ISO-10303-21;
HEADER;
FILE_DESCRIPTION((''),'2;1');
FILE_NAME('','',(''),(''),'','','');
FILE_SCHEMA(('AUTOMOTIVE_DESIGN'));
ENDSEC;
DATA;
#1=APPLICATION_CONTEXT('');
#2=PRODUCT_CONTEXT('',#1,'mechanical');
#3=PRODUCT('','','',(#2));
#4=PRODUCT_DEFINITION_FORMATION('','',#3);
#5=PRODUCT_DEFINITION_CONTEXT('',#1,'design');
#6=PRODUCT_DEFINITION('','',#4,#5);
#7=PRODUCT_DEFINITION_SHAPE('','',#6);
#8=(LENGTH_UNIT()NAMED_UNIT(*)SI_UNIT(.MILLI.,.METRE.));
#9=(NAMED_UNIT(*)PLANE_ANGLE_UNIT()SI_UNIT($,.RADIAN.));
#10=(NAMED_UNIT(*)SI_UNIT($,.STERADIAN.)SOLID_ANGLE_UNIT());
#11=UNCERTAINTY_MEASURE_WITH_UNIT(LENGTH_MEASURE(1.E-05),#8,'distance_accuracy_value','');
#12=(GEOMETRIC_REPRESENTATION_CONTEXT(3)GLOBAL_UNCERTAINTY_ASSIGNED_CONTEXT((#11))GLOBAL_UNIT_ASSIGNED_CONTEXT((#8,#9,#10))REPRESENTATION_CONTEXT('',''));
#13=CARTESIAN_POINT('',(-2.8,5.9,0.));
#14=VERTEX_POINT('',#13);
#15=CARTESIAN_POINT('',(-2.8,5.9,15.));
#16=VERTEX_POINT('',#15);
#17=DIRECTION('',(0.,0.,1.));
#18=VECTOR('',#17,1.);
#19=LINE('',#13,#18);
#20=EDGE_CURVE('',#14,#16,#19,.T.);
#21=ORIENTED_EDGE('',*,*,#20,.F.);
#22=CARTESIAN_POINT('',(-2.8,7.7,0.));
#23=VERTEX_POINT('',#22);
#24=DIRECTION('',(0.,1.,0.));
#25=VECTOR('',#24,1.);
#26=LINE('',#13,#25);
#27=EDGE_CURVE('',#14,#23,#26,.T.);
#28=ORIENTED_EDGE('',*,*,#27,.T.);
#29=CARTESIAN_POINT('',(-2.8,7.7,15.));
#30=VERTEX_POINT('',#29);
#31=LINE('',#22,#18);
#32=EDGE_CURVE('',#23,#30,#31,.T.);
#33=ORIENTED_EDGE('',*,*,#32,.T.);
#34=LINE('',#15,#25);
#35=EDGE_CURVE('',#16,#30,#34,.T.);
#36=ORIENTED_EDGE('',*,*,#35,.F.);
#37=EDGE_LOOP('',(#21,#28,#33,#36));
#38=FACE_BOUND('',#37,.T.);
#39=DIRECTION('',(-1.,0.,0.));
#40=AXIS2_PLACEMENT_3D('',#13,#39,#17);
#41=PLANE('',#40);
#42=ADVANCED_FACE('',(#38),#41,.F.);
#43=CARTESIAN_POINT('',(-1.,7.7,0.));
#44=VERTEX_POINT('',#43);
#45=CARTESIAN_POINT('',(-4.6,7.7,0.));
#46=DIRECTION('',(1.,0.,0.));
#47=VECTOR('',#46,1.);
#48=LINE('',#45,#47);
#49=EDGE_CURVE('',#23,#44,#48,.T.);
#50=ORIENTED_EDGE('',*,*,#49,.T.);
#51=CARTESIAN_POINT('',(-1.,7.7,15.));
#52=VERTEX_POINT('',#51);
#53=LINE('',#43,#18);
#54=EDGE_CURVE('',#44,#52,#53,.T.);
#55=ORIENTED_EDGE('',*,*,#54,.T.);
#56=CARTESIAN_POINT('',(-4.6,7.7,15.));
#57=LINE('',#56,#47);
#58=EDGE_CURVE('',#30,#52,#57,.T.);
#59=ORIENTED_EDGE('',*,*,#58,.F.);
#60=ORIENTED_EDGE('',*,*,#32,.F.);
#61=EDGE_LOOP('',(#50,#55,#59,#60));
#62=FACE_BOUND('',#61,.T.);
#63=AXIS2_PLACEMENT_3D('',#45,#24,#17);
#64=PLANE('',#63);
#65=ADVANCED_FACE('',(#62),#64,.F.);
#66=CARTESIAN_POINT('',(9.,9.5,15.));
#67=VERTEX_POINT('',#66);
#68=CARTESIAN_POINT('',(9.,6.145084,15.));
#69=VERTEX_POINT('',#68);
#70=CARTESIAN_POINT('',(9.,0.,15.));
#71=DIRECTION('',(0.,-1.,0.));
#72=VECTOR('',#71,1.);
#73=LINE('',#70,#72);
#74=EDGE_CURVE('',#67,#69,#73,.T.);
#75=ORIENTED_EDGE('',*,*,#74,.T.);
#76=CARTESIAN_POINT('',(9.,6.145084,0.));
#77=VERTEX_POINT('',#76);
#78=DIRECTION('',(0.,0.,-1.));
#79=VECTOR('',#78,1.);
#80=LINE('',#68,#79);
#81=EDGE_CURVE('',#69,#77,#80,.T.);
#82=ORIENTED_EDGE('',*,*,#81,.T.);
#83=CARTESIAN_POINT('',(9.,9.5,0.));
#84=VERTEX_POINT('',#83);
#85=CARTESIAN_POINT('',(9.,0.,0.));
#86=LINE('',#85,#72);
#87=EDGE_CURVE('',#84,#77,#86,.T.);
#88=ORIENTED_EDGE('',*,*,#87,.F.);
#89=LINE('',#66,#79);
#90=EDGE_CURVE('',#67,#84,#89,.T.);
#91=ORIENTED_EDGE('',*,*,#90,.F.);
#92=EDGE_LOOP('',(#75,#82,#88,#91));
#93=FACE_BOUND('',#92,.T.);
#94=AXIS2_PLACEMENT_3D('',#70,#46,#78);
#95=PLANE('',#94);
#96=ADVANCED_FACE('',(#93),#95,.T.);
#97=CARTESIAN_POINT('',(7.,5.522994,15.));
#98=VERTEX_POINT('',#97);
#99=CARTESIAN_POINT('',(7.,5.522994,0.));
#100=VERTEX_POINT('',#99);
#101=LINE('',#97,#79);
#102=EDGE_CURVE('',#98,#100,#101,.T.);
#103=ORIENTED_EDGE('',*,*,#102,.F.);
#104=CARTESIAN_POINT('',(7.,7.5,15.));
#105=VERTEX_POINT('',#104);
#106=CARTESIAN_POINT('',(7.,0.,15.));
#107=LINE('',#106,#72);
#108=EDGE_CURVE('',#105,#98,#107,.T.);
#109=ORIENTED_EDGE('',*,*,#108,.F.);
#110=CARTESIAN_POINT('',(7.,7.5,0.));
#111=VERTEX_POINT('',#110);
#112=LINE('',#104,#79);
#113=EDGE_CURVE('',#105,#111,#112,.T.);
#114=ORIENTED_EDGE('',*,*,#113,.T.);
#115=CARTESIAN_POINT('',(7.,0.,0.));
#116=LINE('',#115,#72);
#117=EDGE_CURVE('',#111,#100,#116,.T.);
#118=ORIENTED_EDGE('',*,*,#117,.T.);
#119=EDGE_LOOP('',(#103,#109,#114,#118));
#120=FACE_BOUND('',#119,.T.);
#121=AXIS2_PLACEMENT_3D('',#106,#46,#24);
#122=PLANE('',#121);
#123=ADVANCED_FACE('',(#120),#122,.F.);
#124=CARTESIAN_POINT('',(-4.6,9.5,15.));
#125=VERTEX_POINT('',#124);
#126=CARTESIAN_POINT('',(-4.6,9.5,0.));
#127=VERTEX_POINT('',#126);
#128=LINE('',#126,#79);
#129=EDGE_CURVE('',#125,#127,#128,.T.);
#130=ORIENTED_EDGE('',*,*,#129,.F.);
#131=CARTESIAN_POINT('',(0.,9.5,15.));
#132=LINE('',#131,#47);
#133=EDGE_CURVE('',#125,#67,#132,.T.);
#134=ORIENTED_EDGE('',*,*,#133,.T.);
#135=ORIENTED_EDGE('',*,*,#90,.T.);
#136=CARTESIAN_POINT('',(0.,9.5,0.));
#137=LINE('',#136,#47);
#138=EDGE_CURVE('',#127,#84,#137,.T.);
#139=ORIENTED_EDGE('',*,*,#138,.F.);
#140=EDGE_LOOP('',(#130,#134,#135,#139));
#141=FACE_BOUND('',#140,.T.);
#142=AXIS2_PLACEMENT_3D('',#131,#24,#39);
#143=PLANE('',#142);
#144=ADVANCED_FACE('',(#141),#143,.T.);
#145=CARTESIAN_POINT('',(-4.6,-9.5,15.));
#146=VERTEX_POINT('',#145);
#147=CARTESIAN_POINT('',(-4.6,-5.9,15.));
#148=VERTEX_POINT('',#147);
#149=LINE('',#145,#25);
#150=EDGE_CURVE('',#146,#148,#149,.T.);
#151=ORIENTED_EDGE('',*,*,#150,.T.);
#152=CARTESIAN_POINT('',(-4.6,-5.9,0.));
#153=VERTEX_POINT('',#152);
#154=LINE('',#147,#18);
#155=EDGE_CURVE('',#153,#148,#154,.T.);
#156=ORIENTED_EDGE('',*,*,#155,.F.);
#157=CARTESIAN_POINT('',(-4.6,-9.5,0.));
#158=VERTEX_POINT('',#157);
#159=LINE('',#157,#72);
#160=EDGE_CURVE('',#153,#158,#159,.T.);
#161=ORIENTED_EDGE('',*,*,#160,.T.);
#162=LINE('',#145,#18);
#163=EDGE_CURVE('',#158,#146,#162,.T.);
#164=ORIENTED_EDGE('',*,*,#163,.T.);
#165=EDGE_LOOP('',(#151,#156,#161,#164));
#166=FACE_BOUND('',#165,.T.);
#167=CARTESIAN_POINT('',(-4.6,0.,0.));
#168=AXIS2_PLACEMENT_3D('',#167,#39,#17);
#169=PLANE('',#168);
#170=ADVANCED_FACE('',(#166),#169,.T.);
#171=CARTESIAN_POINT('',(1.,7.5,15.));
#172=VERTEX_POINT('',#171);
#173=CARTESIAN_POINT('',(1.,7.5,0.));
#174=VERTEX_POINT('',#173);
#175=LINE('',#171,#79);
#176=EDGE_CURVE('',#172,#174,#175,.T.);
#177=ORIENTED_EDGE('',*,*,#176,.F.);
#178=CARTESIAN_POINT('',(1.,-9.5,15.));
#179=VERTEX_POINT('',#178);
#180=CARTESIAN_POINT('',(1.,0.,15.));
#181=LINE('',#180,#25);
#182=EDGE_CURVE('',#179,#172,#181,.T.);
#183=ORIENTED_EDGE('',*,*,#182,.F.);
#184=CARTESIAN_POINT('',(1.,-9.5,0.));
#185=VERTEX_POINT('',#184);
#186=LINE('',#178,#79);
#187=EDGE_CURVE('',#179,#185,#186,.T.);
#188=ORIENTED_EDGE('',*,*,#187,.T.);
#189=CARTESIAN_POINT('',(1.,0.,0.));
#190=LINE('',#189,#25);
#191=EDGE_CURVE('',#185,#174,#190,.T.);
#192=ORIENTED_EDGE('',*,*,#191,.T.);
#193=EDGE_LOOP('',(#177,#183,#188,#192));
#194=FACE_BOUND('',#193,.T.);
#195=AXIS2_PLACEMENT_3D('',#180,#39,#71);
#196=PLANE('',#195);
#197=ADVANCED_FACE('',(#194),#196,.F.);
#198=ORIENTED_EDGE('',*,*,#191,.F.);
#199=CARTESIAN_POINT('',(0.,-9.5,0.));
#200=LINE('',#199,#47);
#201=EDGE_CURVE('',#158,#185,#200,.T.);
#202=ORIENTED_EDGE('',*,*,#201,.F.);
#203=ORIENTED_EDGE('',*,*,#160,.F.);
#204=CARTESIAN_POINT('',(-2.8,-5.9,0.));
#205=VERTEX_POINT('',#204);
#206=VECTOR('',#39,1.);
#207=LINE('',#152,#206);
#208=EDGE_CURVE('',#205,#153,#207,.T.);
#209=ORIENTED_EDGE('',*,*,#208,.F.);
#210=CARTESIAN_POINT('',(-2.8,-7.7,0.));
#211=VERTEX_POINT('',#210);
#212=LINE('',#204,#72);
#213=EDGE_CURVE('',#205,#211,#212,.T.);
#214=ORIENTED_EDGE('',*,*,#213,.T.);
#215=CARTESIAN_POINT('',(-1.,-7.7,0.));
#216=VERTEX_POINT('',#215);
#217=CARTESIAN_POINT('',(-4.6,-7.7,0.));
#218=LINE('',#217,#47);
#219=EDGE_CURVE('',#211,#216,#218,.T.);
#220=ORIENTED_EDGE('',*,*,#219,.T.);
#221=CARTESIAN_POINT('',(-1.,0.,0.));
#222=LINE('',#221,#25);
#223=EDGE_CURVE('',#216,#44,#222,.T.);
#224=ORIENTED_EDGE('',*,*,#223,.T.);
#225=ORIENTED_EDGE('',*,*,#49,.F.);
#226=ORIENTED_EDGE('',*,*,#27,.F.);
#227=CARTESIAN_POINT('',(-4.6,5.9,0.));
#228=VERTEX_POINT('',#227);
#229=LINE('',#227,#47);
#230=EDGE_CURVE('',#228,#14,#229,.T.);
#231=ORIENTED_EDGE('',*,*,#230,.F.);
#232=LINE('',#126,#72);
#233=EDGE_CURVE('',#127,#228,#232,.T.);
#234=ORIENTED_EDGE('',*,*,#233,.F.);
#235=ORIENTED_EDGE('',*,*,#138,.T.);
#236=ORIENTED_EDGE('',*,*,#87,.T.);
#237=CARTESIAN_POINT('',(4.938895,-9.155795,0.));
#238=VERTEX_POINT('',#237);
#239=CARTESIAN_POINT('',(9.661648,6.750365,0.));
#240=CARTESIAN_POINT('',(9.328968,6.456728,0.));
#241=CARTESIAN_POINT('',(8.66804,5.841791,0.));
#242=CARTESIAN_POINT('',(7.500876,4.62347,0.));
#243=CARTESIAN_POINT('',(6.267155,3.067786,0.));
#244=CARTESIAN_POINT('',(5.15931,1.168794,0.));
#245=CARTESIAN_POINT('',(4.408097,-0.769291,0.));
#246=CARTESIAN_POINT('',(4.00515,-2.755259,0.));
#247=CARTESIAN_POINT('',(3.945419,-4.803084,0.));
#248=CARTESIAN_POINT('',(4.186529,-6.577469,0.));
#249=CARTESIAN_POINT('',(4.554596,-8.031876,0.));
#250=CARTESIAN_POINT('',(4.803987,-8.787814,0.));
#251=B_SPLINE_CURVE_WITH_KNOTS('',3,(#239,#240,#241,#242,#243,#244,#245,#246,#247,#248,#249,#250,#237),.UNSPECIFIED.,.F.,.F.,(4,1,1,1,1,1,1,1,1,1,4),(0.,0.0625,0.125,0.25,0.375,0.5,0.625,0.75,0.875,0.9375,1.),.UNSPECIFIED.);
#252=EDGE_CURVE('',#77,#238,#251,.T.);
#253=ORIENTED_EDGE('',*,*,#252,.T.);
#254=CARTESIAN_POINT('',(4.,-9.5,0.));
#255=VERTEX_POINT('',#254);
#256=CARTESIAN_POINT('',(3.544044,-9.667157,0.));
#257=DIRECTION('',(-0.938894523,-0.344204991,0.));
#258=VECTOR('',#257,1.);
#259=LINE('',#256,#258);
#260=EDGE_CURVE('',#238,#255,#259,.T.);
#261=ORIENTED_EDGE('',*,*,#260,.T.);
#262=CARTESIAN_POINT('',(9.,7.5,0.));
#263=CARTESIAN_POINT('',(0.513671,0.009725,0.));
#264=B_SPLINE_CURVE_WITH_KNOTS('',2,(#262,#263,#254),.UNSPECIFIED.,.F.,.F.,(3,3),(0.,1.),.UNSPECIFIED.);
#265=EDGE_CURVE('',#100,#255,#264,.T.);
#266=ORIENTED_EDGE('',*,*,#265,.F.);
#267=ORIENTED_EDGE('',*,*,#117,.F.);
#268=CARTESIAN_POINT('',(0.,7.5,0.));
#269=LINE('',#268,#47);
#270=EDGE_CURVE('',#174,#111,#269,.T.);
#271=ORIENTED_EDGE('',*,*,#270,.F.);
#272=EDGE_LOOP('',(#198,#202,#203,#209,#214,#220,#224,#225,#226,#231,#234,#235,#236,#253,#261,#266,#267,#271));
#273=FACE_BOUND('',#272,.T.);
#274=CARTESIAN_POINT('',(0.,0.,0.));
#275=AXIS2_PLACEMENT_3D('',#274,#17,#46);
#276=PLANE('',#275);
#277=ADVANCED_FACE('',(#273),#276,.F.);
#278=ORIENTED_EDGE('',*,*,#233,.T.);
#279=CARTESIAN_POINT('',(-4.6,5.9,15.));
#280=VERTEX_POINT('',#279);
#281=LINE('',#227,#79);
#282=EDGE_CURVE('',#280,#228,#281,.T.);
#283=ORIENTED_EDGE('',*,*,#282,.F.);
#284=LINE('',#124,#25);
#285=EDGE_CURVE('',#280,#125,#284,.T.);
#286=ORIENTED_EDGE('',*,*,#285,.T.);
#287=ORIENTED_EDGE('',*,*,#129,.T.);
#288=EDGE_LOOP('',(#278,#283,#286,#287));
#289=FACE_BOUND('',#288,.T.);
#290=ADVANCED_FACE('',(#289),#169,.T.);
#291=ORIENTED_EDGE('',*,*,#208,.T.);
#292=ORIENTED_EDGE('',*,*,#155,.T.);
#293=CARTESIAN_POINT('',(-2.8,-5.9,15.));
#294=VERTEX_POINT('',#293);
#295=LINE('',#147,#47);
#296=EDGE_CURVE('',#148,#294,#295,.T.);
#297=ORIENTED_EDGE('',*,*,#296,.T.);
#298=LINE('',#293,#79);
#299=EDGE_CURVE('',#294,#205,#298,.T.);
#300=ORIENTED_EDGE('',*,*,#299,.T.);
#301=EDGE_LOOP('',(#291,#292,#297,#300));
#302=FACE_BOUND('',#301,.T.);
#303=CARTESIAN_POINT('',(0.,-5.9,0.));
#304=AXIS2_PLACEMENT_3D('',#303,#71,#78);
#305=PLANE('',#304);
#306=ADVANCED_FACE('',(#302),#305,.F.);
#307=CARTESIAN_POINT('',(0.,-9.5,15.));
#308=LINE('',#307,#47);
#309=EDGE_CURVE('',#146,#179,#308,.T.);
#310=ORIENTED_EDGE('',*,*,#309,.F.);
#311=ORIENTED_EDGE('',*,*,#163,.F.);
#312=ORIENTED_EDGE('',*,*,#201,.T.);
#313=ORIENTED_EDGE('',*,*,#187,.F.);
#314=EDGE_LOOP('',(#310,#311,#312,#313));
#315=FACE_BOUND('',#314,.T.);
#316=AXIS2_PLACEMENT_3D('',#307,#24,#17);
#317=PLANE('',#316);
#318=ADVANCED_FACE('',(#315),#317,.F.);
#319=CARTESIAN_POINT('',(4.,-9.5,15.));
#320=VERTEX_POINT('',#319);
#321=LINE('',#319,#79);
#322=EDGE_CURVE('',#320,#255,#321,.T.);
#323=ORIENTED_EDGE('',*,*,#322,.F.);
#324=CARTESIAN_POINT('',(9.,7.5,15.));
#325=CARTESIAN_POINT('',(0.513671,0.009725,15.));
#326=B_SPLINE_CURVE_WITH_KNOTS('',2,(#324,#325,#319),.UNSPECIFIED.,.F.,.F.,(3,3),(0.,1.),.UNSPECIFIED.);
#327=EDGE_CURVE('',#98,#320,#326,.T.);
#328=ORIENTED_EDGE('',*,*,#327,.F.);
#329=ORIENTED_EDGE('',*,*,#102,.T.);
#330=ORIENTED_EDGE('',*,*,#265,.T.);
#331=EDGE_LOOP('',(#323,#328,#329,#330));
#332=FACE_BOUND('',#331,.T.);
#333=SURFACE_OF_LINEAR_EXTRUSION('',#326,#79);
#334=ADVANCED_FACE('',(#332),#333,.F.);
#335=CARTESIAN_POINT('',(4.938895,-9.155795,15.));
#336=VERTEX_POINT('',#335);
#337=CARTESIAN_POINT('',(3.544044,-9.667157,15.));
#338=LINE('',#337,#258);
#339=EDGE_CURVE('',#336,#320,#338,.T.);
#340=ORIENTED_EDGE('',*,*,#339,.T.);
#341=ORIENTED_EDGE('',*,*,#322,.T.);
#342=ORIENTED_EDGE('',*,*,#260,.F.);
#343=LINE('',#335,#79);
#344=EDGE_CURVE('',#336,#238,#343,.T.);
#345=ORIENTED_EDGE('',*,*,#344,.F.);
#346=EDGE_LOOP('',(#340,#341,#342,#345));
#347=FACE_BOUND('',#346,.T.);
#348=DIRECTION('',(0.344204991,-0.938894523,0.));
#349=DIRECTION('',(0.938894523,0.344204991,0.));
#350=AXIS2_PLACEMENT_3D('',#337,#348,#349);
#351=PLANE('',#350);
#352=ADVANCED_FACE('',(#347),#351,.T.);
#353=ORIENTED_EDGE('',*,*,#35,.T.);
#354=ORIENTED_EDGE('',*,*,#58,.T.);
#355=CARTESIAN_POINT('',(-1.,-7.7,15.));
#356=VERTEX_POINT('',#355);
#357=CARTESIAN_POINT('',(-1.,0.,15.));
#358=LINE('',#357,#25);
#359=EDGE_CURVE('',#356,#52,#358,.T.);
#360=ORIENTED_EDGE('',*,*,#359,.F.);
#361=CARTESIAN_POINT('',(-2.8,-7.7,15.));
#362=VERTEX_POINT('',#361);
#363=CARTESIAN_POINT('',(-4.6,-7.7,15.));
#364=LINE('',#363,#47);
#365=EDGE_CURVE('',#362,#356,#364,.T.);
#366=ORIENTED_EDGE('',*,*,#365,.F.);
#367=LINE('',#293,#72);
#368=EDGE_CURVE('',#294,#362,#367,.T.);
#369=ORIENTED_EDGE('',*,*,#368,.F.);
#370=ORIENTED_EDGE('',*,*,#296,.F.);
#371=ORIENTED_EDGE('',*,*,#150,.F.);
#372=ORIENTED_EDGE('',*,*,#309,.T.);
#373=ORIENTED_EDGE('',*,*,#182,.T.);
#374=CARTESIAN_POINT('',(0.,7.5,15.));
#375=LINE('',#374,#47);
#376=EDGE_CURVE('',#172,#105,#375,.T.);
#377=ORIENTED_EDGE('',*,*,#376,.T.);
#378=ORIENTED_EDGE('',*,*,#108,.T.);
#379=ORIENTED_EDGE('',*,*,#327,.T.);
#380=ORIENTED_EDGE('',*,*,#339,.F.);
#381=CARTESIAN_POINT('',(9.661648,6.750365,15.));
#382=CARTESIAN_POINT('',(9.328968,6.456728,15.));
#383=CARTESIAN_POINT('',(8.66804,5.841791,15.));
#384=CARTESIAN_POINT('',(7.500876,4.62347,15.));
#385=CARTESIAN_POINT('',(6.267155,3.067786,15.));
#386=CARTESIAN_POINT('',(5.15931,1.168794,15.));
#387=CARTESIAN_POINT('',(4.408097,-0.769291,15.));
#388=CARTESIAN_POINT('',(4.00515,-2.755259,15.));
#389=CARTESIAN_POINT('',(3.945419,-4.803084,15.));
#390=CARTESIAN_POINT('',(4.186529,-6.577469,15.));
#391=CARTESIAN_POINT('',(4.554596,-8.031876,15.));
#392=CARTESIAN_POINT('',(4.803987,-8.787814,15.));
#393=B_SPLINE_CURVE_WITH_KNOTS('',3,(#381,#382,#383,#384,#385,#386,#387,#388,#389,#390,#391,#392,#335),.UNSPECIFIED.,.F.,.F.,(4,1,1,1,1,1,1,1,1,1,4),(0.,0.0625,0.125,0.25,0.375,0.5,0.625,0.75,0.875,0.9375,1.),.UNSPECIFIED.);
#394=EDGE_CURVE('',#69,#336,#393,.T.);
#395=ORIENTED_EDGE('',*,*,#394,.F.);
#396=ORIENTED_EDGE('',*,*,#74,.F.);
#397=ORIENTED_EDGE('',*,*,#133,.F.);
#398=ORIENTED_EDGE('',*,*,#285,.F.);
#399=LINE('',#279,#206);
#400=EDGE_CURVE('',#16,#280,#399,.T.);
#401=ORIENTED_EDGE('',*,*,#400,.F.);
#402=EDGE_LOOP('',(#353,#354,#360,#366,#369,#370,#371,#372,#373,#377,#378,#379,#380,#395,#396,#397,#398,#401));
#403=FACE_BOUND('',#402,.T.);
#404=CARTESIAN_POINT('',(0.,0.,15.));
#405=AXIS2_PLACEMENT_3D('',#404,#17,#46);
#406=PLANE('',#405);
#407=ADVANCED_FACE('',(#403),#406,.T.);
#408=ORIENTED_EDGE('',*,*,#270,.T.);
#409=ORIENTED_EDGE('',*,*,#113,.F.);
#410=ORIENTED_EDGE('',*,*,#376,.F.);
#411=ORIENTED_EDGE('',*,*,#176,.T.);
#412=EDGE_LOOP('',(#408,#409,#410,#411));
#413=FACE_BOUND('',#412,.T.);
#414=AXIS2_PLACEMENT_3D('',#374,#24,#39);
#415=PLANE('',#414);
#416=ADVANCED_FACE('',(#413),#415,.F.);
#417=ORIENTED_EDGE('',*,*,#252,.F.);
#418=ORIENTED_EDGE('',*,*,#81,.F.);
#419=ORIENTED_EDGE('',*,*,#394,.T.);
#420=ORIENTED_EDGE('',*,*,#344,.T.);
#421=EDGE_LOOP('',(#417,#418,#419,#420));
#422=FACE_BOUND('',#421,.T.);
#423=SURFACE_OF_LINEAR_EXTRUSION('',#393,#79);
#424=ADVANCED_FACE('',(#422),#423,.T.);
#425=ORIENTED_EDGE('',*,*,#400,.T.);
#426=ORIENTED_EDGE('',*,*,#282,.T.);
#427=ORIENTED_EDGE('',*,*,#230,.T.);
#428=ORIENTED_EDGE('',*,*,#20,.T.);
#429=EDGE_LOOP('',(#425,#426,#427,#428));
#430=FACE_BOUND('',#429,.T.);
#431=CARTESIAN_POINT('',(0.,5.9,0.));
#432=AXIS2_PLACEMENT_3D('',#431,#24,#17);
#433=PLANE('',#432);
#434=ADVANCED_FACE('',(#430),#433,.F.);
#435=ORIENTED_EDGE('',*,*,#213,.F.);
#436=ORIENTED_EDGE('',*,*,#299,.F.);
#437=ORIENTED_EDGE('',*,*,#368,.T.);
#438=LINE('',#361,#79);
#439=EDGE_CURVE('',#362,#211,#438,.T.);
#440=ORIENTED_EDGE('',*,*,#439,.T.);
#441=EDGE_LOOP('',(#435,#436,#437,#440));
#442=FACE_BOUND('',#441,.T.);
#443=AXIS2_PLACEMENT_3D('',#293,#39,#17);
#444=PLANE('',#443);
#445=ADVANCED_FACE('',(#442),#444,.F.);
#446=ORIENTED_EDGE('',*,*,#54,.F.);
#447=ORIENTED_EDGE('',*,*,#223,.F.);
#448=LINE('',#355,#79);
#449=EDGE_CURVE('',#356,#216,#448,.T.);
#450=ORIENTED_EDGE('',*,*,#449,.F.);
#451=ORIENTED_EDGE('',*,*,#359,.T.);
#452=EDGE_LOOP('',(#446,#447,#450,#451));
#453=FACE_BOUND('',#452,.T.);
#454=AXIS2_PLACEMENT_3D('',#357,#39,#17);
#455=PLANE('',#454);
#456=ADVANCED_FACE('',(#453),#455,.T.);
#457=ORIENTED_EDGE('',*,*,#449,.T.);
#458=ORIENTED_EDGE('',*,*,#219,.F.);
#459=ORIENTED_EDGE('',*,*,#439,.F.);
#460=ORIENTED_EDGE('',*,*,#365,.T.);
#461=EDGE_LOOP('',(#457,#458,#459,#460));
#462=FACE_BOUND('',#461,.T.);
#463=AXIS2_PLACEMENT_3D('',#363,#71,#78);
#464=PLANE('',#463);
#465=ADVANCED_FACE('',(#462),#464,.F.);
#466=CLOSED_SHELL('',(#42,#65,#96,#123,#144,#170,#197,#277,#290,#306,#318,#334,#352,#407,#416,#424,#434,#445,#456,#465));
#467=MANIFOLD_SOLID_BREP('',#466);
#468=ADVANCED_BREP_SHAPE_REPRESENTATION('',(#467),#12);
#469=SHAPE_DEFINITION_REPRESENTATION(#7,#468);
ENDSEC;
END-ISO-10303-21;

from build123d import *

# Parameters (mm, degrees)
AUFSATZ_LINEAR_AUSTRAGEN1_DEPTH = 15
SKIZZE8_W                       = 15
SKIZZE8_H                       = 1.8
AUFSATZ_LINEAR_AUSTRAGEN2_DEPTH = 3.6
SKIZZE9_W                       = 1.8
SKIZZE9_H                       = 15
AUFSATZ_LINEAR_AUSTRAGEN3_DEPTH = 1.8
SKIZZE10_W                      = 1.8
SKIZZE10_H                      = 15
AUFSATZ_LINEAR_AUSTRAGEN4_DEPTH = 1.8


# Read off the part's stored shape, not the designer's step: Aufsatz-Linear austragen1
with BuildPart() as part:
    # Aufsatz-Linear austragen1 outline → Aufsatz-Linear austragen1 (new body)
    with BuildSketch(Plane.XY):
        with BuildLine():
            Line((7, 7.5), (7, 5.522993755))
            add(Edge.make_bspline(
                [(7, 5.522993755), (0.965861159, -1.223721572), (4, -9.5)],
                knots=[0.129703712, 0.129703712, 0.129703712, 1, 1, 1], degree=2))
            Line((4, -9.5), (4.938894523, -9.155795009))
            add(Edge.make_bspline(
                [(9, 6.145084082), (8.894106899, 6.044673778), (8.472209731, 5.637376992), (7.500876339, 4.623469608), (6.267154764, 3.067786271), (5.159309564, 1.168794415), (4.408096908, -0.769290789), (4.005150376, -2.755259304), (3.945419318, -4.803083613), (4.18652921, -6.57746866), (4.554595844, -8.031875726), (4.803987208, -8.787813624), (4.938894523, -9.155795009)],
                knots=[0.041945828, 0.041945828, 0.041945828, 0.041945828, 0.0625, 0.125, 0.25, 0.375, 0.5, 0.625, 0.75, 0.875, 0.9375, 1, 1, 1, 1], degree=3))
            Line((9, 6.145084082), (9, 9.5))
            Line((9, 9.5), (-1, 9.5))
            Line((-1, 9.5), (-1, -9.5))
            Line((-1, -9.5), (1, -9.5))
            Line((1, -9.5), (1, 7.5))
            Line((1, 7.5), (7, 7.5))
        make_face()
    extrude(amount=AUFSATZ_LINEAR_AUSTRAGEN1_DEPTH)

    # Skizze8 → Aufsatz-Linear austragen2 (add)
    with BuildSketch(Plane.ZY.offset(1)):
        with Locations((7.5, 8.6)):
            Rectangle(SKIZZE8_W, SKIZZE8_H)
        with Locations((7.5, -8.6)):
            Rectangle(SKIZZE8_W, SKIZZE8_H)
    extrude(amount=AUFSATZ_LINEAR_AUSTRAGEN2_DEPTH)

    # Skizze9 → Aufsatz-Linear austragen3 (add)
    with BuildSketch(Plane(origin=(0, -7.7, 0), x_dir=(1, 0, 0), z_dir=(0, 1, 0))):
        with Locations((-3.7, -7.5)):
            Rectangle(SKIZZE9_W, SKIZZE9_H)
    extrude(amount=AUFSATZ_LINEAR_AUSTRAGEN3_DEPTH)

    # Skizze10 → Aufsatz-Linear austragen4 (add)
    with BuildSketch(Plane.XZ.offset(-7.7)):
        with Locations((-3.7, 7.5)):
            Rectangle(SKIZZE10_W, SKIZZE10_H)
    extrude(amount=AUFSATZ_LINEAR_AUSTRAGEN4_DEPTH)


solid = part.part
